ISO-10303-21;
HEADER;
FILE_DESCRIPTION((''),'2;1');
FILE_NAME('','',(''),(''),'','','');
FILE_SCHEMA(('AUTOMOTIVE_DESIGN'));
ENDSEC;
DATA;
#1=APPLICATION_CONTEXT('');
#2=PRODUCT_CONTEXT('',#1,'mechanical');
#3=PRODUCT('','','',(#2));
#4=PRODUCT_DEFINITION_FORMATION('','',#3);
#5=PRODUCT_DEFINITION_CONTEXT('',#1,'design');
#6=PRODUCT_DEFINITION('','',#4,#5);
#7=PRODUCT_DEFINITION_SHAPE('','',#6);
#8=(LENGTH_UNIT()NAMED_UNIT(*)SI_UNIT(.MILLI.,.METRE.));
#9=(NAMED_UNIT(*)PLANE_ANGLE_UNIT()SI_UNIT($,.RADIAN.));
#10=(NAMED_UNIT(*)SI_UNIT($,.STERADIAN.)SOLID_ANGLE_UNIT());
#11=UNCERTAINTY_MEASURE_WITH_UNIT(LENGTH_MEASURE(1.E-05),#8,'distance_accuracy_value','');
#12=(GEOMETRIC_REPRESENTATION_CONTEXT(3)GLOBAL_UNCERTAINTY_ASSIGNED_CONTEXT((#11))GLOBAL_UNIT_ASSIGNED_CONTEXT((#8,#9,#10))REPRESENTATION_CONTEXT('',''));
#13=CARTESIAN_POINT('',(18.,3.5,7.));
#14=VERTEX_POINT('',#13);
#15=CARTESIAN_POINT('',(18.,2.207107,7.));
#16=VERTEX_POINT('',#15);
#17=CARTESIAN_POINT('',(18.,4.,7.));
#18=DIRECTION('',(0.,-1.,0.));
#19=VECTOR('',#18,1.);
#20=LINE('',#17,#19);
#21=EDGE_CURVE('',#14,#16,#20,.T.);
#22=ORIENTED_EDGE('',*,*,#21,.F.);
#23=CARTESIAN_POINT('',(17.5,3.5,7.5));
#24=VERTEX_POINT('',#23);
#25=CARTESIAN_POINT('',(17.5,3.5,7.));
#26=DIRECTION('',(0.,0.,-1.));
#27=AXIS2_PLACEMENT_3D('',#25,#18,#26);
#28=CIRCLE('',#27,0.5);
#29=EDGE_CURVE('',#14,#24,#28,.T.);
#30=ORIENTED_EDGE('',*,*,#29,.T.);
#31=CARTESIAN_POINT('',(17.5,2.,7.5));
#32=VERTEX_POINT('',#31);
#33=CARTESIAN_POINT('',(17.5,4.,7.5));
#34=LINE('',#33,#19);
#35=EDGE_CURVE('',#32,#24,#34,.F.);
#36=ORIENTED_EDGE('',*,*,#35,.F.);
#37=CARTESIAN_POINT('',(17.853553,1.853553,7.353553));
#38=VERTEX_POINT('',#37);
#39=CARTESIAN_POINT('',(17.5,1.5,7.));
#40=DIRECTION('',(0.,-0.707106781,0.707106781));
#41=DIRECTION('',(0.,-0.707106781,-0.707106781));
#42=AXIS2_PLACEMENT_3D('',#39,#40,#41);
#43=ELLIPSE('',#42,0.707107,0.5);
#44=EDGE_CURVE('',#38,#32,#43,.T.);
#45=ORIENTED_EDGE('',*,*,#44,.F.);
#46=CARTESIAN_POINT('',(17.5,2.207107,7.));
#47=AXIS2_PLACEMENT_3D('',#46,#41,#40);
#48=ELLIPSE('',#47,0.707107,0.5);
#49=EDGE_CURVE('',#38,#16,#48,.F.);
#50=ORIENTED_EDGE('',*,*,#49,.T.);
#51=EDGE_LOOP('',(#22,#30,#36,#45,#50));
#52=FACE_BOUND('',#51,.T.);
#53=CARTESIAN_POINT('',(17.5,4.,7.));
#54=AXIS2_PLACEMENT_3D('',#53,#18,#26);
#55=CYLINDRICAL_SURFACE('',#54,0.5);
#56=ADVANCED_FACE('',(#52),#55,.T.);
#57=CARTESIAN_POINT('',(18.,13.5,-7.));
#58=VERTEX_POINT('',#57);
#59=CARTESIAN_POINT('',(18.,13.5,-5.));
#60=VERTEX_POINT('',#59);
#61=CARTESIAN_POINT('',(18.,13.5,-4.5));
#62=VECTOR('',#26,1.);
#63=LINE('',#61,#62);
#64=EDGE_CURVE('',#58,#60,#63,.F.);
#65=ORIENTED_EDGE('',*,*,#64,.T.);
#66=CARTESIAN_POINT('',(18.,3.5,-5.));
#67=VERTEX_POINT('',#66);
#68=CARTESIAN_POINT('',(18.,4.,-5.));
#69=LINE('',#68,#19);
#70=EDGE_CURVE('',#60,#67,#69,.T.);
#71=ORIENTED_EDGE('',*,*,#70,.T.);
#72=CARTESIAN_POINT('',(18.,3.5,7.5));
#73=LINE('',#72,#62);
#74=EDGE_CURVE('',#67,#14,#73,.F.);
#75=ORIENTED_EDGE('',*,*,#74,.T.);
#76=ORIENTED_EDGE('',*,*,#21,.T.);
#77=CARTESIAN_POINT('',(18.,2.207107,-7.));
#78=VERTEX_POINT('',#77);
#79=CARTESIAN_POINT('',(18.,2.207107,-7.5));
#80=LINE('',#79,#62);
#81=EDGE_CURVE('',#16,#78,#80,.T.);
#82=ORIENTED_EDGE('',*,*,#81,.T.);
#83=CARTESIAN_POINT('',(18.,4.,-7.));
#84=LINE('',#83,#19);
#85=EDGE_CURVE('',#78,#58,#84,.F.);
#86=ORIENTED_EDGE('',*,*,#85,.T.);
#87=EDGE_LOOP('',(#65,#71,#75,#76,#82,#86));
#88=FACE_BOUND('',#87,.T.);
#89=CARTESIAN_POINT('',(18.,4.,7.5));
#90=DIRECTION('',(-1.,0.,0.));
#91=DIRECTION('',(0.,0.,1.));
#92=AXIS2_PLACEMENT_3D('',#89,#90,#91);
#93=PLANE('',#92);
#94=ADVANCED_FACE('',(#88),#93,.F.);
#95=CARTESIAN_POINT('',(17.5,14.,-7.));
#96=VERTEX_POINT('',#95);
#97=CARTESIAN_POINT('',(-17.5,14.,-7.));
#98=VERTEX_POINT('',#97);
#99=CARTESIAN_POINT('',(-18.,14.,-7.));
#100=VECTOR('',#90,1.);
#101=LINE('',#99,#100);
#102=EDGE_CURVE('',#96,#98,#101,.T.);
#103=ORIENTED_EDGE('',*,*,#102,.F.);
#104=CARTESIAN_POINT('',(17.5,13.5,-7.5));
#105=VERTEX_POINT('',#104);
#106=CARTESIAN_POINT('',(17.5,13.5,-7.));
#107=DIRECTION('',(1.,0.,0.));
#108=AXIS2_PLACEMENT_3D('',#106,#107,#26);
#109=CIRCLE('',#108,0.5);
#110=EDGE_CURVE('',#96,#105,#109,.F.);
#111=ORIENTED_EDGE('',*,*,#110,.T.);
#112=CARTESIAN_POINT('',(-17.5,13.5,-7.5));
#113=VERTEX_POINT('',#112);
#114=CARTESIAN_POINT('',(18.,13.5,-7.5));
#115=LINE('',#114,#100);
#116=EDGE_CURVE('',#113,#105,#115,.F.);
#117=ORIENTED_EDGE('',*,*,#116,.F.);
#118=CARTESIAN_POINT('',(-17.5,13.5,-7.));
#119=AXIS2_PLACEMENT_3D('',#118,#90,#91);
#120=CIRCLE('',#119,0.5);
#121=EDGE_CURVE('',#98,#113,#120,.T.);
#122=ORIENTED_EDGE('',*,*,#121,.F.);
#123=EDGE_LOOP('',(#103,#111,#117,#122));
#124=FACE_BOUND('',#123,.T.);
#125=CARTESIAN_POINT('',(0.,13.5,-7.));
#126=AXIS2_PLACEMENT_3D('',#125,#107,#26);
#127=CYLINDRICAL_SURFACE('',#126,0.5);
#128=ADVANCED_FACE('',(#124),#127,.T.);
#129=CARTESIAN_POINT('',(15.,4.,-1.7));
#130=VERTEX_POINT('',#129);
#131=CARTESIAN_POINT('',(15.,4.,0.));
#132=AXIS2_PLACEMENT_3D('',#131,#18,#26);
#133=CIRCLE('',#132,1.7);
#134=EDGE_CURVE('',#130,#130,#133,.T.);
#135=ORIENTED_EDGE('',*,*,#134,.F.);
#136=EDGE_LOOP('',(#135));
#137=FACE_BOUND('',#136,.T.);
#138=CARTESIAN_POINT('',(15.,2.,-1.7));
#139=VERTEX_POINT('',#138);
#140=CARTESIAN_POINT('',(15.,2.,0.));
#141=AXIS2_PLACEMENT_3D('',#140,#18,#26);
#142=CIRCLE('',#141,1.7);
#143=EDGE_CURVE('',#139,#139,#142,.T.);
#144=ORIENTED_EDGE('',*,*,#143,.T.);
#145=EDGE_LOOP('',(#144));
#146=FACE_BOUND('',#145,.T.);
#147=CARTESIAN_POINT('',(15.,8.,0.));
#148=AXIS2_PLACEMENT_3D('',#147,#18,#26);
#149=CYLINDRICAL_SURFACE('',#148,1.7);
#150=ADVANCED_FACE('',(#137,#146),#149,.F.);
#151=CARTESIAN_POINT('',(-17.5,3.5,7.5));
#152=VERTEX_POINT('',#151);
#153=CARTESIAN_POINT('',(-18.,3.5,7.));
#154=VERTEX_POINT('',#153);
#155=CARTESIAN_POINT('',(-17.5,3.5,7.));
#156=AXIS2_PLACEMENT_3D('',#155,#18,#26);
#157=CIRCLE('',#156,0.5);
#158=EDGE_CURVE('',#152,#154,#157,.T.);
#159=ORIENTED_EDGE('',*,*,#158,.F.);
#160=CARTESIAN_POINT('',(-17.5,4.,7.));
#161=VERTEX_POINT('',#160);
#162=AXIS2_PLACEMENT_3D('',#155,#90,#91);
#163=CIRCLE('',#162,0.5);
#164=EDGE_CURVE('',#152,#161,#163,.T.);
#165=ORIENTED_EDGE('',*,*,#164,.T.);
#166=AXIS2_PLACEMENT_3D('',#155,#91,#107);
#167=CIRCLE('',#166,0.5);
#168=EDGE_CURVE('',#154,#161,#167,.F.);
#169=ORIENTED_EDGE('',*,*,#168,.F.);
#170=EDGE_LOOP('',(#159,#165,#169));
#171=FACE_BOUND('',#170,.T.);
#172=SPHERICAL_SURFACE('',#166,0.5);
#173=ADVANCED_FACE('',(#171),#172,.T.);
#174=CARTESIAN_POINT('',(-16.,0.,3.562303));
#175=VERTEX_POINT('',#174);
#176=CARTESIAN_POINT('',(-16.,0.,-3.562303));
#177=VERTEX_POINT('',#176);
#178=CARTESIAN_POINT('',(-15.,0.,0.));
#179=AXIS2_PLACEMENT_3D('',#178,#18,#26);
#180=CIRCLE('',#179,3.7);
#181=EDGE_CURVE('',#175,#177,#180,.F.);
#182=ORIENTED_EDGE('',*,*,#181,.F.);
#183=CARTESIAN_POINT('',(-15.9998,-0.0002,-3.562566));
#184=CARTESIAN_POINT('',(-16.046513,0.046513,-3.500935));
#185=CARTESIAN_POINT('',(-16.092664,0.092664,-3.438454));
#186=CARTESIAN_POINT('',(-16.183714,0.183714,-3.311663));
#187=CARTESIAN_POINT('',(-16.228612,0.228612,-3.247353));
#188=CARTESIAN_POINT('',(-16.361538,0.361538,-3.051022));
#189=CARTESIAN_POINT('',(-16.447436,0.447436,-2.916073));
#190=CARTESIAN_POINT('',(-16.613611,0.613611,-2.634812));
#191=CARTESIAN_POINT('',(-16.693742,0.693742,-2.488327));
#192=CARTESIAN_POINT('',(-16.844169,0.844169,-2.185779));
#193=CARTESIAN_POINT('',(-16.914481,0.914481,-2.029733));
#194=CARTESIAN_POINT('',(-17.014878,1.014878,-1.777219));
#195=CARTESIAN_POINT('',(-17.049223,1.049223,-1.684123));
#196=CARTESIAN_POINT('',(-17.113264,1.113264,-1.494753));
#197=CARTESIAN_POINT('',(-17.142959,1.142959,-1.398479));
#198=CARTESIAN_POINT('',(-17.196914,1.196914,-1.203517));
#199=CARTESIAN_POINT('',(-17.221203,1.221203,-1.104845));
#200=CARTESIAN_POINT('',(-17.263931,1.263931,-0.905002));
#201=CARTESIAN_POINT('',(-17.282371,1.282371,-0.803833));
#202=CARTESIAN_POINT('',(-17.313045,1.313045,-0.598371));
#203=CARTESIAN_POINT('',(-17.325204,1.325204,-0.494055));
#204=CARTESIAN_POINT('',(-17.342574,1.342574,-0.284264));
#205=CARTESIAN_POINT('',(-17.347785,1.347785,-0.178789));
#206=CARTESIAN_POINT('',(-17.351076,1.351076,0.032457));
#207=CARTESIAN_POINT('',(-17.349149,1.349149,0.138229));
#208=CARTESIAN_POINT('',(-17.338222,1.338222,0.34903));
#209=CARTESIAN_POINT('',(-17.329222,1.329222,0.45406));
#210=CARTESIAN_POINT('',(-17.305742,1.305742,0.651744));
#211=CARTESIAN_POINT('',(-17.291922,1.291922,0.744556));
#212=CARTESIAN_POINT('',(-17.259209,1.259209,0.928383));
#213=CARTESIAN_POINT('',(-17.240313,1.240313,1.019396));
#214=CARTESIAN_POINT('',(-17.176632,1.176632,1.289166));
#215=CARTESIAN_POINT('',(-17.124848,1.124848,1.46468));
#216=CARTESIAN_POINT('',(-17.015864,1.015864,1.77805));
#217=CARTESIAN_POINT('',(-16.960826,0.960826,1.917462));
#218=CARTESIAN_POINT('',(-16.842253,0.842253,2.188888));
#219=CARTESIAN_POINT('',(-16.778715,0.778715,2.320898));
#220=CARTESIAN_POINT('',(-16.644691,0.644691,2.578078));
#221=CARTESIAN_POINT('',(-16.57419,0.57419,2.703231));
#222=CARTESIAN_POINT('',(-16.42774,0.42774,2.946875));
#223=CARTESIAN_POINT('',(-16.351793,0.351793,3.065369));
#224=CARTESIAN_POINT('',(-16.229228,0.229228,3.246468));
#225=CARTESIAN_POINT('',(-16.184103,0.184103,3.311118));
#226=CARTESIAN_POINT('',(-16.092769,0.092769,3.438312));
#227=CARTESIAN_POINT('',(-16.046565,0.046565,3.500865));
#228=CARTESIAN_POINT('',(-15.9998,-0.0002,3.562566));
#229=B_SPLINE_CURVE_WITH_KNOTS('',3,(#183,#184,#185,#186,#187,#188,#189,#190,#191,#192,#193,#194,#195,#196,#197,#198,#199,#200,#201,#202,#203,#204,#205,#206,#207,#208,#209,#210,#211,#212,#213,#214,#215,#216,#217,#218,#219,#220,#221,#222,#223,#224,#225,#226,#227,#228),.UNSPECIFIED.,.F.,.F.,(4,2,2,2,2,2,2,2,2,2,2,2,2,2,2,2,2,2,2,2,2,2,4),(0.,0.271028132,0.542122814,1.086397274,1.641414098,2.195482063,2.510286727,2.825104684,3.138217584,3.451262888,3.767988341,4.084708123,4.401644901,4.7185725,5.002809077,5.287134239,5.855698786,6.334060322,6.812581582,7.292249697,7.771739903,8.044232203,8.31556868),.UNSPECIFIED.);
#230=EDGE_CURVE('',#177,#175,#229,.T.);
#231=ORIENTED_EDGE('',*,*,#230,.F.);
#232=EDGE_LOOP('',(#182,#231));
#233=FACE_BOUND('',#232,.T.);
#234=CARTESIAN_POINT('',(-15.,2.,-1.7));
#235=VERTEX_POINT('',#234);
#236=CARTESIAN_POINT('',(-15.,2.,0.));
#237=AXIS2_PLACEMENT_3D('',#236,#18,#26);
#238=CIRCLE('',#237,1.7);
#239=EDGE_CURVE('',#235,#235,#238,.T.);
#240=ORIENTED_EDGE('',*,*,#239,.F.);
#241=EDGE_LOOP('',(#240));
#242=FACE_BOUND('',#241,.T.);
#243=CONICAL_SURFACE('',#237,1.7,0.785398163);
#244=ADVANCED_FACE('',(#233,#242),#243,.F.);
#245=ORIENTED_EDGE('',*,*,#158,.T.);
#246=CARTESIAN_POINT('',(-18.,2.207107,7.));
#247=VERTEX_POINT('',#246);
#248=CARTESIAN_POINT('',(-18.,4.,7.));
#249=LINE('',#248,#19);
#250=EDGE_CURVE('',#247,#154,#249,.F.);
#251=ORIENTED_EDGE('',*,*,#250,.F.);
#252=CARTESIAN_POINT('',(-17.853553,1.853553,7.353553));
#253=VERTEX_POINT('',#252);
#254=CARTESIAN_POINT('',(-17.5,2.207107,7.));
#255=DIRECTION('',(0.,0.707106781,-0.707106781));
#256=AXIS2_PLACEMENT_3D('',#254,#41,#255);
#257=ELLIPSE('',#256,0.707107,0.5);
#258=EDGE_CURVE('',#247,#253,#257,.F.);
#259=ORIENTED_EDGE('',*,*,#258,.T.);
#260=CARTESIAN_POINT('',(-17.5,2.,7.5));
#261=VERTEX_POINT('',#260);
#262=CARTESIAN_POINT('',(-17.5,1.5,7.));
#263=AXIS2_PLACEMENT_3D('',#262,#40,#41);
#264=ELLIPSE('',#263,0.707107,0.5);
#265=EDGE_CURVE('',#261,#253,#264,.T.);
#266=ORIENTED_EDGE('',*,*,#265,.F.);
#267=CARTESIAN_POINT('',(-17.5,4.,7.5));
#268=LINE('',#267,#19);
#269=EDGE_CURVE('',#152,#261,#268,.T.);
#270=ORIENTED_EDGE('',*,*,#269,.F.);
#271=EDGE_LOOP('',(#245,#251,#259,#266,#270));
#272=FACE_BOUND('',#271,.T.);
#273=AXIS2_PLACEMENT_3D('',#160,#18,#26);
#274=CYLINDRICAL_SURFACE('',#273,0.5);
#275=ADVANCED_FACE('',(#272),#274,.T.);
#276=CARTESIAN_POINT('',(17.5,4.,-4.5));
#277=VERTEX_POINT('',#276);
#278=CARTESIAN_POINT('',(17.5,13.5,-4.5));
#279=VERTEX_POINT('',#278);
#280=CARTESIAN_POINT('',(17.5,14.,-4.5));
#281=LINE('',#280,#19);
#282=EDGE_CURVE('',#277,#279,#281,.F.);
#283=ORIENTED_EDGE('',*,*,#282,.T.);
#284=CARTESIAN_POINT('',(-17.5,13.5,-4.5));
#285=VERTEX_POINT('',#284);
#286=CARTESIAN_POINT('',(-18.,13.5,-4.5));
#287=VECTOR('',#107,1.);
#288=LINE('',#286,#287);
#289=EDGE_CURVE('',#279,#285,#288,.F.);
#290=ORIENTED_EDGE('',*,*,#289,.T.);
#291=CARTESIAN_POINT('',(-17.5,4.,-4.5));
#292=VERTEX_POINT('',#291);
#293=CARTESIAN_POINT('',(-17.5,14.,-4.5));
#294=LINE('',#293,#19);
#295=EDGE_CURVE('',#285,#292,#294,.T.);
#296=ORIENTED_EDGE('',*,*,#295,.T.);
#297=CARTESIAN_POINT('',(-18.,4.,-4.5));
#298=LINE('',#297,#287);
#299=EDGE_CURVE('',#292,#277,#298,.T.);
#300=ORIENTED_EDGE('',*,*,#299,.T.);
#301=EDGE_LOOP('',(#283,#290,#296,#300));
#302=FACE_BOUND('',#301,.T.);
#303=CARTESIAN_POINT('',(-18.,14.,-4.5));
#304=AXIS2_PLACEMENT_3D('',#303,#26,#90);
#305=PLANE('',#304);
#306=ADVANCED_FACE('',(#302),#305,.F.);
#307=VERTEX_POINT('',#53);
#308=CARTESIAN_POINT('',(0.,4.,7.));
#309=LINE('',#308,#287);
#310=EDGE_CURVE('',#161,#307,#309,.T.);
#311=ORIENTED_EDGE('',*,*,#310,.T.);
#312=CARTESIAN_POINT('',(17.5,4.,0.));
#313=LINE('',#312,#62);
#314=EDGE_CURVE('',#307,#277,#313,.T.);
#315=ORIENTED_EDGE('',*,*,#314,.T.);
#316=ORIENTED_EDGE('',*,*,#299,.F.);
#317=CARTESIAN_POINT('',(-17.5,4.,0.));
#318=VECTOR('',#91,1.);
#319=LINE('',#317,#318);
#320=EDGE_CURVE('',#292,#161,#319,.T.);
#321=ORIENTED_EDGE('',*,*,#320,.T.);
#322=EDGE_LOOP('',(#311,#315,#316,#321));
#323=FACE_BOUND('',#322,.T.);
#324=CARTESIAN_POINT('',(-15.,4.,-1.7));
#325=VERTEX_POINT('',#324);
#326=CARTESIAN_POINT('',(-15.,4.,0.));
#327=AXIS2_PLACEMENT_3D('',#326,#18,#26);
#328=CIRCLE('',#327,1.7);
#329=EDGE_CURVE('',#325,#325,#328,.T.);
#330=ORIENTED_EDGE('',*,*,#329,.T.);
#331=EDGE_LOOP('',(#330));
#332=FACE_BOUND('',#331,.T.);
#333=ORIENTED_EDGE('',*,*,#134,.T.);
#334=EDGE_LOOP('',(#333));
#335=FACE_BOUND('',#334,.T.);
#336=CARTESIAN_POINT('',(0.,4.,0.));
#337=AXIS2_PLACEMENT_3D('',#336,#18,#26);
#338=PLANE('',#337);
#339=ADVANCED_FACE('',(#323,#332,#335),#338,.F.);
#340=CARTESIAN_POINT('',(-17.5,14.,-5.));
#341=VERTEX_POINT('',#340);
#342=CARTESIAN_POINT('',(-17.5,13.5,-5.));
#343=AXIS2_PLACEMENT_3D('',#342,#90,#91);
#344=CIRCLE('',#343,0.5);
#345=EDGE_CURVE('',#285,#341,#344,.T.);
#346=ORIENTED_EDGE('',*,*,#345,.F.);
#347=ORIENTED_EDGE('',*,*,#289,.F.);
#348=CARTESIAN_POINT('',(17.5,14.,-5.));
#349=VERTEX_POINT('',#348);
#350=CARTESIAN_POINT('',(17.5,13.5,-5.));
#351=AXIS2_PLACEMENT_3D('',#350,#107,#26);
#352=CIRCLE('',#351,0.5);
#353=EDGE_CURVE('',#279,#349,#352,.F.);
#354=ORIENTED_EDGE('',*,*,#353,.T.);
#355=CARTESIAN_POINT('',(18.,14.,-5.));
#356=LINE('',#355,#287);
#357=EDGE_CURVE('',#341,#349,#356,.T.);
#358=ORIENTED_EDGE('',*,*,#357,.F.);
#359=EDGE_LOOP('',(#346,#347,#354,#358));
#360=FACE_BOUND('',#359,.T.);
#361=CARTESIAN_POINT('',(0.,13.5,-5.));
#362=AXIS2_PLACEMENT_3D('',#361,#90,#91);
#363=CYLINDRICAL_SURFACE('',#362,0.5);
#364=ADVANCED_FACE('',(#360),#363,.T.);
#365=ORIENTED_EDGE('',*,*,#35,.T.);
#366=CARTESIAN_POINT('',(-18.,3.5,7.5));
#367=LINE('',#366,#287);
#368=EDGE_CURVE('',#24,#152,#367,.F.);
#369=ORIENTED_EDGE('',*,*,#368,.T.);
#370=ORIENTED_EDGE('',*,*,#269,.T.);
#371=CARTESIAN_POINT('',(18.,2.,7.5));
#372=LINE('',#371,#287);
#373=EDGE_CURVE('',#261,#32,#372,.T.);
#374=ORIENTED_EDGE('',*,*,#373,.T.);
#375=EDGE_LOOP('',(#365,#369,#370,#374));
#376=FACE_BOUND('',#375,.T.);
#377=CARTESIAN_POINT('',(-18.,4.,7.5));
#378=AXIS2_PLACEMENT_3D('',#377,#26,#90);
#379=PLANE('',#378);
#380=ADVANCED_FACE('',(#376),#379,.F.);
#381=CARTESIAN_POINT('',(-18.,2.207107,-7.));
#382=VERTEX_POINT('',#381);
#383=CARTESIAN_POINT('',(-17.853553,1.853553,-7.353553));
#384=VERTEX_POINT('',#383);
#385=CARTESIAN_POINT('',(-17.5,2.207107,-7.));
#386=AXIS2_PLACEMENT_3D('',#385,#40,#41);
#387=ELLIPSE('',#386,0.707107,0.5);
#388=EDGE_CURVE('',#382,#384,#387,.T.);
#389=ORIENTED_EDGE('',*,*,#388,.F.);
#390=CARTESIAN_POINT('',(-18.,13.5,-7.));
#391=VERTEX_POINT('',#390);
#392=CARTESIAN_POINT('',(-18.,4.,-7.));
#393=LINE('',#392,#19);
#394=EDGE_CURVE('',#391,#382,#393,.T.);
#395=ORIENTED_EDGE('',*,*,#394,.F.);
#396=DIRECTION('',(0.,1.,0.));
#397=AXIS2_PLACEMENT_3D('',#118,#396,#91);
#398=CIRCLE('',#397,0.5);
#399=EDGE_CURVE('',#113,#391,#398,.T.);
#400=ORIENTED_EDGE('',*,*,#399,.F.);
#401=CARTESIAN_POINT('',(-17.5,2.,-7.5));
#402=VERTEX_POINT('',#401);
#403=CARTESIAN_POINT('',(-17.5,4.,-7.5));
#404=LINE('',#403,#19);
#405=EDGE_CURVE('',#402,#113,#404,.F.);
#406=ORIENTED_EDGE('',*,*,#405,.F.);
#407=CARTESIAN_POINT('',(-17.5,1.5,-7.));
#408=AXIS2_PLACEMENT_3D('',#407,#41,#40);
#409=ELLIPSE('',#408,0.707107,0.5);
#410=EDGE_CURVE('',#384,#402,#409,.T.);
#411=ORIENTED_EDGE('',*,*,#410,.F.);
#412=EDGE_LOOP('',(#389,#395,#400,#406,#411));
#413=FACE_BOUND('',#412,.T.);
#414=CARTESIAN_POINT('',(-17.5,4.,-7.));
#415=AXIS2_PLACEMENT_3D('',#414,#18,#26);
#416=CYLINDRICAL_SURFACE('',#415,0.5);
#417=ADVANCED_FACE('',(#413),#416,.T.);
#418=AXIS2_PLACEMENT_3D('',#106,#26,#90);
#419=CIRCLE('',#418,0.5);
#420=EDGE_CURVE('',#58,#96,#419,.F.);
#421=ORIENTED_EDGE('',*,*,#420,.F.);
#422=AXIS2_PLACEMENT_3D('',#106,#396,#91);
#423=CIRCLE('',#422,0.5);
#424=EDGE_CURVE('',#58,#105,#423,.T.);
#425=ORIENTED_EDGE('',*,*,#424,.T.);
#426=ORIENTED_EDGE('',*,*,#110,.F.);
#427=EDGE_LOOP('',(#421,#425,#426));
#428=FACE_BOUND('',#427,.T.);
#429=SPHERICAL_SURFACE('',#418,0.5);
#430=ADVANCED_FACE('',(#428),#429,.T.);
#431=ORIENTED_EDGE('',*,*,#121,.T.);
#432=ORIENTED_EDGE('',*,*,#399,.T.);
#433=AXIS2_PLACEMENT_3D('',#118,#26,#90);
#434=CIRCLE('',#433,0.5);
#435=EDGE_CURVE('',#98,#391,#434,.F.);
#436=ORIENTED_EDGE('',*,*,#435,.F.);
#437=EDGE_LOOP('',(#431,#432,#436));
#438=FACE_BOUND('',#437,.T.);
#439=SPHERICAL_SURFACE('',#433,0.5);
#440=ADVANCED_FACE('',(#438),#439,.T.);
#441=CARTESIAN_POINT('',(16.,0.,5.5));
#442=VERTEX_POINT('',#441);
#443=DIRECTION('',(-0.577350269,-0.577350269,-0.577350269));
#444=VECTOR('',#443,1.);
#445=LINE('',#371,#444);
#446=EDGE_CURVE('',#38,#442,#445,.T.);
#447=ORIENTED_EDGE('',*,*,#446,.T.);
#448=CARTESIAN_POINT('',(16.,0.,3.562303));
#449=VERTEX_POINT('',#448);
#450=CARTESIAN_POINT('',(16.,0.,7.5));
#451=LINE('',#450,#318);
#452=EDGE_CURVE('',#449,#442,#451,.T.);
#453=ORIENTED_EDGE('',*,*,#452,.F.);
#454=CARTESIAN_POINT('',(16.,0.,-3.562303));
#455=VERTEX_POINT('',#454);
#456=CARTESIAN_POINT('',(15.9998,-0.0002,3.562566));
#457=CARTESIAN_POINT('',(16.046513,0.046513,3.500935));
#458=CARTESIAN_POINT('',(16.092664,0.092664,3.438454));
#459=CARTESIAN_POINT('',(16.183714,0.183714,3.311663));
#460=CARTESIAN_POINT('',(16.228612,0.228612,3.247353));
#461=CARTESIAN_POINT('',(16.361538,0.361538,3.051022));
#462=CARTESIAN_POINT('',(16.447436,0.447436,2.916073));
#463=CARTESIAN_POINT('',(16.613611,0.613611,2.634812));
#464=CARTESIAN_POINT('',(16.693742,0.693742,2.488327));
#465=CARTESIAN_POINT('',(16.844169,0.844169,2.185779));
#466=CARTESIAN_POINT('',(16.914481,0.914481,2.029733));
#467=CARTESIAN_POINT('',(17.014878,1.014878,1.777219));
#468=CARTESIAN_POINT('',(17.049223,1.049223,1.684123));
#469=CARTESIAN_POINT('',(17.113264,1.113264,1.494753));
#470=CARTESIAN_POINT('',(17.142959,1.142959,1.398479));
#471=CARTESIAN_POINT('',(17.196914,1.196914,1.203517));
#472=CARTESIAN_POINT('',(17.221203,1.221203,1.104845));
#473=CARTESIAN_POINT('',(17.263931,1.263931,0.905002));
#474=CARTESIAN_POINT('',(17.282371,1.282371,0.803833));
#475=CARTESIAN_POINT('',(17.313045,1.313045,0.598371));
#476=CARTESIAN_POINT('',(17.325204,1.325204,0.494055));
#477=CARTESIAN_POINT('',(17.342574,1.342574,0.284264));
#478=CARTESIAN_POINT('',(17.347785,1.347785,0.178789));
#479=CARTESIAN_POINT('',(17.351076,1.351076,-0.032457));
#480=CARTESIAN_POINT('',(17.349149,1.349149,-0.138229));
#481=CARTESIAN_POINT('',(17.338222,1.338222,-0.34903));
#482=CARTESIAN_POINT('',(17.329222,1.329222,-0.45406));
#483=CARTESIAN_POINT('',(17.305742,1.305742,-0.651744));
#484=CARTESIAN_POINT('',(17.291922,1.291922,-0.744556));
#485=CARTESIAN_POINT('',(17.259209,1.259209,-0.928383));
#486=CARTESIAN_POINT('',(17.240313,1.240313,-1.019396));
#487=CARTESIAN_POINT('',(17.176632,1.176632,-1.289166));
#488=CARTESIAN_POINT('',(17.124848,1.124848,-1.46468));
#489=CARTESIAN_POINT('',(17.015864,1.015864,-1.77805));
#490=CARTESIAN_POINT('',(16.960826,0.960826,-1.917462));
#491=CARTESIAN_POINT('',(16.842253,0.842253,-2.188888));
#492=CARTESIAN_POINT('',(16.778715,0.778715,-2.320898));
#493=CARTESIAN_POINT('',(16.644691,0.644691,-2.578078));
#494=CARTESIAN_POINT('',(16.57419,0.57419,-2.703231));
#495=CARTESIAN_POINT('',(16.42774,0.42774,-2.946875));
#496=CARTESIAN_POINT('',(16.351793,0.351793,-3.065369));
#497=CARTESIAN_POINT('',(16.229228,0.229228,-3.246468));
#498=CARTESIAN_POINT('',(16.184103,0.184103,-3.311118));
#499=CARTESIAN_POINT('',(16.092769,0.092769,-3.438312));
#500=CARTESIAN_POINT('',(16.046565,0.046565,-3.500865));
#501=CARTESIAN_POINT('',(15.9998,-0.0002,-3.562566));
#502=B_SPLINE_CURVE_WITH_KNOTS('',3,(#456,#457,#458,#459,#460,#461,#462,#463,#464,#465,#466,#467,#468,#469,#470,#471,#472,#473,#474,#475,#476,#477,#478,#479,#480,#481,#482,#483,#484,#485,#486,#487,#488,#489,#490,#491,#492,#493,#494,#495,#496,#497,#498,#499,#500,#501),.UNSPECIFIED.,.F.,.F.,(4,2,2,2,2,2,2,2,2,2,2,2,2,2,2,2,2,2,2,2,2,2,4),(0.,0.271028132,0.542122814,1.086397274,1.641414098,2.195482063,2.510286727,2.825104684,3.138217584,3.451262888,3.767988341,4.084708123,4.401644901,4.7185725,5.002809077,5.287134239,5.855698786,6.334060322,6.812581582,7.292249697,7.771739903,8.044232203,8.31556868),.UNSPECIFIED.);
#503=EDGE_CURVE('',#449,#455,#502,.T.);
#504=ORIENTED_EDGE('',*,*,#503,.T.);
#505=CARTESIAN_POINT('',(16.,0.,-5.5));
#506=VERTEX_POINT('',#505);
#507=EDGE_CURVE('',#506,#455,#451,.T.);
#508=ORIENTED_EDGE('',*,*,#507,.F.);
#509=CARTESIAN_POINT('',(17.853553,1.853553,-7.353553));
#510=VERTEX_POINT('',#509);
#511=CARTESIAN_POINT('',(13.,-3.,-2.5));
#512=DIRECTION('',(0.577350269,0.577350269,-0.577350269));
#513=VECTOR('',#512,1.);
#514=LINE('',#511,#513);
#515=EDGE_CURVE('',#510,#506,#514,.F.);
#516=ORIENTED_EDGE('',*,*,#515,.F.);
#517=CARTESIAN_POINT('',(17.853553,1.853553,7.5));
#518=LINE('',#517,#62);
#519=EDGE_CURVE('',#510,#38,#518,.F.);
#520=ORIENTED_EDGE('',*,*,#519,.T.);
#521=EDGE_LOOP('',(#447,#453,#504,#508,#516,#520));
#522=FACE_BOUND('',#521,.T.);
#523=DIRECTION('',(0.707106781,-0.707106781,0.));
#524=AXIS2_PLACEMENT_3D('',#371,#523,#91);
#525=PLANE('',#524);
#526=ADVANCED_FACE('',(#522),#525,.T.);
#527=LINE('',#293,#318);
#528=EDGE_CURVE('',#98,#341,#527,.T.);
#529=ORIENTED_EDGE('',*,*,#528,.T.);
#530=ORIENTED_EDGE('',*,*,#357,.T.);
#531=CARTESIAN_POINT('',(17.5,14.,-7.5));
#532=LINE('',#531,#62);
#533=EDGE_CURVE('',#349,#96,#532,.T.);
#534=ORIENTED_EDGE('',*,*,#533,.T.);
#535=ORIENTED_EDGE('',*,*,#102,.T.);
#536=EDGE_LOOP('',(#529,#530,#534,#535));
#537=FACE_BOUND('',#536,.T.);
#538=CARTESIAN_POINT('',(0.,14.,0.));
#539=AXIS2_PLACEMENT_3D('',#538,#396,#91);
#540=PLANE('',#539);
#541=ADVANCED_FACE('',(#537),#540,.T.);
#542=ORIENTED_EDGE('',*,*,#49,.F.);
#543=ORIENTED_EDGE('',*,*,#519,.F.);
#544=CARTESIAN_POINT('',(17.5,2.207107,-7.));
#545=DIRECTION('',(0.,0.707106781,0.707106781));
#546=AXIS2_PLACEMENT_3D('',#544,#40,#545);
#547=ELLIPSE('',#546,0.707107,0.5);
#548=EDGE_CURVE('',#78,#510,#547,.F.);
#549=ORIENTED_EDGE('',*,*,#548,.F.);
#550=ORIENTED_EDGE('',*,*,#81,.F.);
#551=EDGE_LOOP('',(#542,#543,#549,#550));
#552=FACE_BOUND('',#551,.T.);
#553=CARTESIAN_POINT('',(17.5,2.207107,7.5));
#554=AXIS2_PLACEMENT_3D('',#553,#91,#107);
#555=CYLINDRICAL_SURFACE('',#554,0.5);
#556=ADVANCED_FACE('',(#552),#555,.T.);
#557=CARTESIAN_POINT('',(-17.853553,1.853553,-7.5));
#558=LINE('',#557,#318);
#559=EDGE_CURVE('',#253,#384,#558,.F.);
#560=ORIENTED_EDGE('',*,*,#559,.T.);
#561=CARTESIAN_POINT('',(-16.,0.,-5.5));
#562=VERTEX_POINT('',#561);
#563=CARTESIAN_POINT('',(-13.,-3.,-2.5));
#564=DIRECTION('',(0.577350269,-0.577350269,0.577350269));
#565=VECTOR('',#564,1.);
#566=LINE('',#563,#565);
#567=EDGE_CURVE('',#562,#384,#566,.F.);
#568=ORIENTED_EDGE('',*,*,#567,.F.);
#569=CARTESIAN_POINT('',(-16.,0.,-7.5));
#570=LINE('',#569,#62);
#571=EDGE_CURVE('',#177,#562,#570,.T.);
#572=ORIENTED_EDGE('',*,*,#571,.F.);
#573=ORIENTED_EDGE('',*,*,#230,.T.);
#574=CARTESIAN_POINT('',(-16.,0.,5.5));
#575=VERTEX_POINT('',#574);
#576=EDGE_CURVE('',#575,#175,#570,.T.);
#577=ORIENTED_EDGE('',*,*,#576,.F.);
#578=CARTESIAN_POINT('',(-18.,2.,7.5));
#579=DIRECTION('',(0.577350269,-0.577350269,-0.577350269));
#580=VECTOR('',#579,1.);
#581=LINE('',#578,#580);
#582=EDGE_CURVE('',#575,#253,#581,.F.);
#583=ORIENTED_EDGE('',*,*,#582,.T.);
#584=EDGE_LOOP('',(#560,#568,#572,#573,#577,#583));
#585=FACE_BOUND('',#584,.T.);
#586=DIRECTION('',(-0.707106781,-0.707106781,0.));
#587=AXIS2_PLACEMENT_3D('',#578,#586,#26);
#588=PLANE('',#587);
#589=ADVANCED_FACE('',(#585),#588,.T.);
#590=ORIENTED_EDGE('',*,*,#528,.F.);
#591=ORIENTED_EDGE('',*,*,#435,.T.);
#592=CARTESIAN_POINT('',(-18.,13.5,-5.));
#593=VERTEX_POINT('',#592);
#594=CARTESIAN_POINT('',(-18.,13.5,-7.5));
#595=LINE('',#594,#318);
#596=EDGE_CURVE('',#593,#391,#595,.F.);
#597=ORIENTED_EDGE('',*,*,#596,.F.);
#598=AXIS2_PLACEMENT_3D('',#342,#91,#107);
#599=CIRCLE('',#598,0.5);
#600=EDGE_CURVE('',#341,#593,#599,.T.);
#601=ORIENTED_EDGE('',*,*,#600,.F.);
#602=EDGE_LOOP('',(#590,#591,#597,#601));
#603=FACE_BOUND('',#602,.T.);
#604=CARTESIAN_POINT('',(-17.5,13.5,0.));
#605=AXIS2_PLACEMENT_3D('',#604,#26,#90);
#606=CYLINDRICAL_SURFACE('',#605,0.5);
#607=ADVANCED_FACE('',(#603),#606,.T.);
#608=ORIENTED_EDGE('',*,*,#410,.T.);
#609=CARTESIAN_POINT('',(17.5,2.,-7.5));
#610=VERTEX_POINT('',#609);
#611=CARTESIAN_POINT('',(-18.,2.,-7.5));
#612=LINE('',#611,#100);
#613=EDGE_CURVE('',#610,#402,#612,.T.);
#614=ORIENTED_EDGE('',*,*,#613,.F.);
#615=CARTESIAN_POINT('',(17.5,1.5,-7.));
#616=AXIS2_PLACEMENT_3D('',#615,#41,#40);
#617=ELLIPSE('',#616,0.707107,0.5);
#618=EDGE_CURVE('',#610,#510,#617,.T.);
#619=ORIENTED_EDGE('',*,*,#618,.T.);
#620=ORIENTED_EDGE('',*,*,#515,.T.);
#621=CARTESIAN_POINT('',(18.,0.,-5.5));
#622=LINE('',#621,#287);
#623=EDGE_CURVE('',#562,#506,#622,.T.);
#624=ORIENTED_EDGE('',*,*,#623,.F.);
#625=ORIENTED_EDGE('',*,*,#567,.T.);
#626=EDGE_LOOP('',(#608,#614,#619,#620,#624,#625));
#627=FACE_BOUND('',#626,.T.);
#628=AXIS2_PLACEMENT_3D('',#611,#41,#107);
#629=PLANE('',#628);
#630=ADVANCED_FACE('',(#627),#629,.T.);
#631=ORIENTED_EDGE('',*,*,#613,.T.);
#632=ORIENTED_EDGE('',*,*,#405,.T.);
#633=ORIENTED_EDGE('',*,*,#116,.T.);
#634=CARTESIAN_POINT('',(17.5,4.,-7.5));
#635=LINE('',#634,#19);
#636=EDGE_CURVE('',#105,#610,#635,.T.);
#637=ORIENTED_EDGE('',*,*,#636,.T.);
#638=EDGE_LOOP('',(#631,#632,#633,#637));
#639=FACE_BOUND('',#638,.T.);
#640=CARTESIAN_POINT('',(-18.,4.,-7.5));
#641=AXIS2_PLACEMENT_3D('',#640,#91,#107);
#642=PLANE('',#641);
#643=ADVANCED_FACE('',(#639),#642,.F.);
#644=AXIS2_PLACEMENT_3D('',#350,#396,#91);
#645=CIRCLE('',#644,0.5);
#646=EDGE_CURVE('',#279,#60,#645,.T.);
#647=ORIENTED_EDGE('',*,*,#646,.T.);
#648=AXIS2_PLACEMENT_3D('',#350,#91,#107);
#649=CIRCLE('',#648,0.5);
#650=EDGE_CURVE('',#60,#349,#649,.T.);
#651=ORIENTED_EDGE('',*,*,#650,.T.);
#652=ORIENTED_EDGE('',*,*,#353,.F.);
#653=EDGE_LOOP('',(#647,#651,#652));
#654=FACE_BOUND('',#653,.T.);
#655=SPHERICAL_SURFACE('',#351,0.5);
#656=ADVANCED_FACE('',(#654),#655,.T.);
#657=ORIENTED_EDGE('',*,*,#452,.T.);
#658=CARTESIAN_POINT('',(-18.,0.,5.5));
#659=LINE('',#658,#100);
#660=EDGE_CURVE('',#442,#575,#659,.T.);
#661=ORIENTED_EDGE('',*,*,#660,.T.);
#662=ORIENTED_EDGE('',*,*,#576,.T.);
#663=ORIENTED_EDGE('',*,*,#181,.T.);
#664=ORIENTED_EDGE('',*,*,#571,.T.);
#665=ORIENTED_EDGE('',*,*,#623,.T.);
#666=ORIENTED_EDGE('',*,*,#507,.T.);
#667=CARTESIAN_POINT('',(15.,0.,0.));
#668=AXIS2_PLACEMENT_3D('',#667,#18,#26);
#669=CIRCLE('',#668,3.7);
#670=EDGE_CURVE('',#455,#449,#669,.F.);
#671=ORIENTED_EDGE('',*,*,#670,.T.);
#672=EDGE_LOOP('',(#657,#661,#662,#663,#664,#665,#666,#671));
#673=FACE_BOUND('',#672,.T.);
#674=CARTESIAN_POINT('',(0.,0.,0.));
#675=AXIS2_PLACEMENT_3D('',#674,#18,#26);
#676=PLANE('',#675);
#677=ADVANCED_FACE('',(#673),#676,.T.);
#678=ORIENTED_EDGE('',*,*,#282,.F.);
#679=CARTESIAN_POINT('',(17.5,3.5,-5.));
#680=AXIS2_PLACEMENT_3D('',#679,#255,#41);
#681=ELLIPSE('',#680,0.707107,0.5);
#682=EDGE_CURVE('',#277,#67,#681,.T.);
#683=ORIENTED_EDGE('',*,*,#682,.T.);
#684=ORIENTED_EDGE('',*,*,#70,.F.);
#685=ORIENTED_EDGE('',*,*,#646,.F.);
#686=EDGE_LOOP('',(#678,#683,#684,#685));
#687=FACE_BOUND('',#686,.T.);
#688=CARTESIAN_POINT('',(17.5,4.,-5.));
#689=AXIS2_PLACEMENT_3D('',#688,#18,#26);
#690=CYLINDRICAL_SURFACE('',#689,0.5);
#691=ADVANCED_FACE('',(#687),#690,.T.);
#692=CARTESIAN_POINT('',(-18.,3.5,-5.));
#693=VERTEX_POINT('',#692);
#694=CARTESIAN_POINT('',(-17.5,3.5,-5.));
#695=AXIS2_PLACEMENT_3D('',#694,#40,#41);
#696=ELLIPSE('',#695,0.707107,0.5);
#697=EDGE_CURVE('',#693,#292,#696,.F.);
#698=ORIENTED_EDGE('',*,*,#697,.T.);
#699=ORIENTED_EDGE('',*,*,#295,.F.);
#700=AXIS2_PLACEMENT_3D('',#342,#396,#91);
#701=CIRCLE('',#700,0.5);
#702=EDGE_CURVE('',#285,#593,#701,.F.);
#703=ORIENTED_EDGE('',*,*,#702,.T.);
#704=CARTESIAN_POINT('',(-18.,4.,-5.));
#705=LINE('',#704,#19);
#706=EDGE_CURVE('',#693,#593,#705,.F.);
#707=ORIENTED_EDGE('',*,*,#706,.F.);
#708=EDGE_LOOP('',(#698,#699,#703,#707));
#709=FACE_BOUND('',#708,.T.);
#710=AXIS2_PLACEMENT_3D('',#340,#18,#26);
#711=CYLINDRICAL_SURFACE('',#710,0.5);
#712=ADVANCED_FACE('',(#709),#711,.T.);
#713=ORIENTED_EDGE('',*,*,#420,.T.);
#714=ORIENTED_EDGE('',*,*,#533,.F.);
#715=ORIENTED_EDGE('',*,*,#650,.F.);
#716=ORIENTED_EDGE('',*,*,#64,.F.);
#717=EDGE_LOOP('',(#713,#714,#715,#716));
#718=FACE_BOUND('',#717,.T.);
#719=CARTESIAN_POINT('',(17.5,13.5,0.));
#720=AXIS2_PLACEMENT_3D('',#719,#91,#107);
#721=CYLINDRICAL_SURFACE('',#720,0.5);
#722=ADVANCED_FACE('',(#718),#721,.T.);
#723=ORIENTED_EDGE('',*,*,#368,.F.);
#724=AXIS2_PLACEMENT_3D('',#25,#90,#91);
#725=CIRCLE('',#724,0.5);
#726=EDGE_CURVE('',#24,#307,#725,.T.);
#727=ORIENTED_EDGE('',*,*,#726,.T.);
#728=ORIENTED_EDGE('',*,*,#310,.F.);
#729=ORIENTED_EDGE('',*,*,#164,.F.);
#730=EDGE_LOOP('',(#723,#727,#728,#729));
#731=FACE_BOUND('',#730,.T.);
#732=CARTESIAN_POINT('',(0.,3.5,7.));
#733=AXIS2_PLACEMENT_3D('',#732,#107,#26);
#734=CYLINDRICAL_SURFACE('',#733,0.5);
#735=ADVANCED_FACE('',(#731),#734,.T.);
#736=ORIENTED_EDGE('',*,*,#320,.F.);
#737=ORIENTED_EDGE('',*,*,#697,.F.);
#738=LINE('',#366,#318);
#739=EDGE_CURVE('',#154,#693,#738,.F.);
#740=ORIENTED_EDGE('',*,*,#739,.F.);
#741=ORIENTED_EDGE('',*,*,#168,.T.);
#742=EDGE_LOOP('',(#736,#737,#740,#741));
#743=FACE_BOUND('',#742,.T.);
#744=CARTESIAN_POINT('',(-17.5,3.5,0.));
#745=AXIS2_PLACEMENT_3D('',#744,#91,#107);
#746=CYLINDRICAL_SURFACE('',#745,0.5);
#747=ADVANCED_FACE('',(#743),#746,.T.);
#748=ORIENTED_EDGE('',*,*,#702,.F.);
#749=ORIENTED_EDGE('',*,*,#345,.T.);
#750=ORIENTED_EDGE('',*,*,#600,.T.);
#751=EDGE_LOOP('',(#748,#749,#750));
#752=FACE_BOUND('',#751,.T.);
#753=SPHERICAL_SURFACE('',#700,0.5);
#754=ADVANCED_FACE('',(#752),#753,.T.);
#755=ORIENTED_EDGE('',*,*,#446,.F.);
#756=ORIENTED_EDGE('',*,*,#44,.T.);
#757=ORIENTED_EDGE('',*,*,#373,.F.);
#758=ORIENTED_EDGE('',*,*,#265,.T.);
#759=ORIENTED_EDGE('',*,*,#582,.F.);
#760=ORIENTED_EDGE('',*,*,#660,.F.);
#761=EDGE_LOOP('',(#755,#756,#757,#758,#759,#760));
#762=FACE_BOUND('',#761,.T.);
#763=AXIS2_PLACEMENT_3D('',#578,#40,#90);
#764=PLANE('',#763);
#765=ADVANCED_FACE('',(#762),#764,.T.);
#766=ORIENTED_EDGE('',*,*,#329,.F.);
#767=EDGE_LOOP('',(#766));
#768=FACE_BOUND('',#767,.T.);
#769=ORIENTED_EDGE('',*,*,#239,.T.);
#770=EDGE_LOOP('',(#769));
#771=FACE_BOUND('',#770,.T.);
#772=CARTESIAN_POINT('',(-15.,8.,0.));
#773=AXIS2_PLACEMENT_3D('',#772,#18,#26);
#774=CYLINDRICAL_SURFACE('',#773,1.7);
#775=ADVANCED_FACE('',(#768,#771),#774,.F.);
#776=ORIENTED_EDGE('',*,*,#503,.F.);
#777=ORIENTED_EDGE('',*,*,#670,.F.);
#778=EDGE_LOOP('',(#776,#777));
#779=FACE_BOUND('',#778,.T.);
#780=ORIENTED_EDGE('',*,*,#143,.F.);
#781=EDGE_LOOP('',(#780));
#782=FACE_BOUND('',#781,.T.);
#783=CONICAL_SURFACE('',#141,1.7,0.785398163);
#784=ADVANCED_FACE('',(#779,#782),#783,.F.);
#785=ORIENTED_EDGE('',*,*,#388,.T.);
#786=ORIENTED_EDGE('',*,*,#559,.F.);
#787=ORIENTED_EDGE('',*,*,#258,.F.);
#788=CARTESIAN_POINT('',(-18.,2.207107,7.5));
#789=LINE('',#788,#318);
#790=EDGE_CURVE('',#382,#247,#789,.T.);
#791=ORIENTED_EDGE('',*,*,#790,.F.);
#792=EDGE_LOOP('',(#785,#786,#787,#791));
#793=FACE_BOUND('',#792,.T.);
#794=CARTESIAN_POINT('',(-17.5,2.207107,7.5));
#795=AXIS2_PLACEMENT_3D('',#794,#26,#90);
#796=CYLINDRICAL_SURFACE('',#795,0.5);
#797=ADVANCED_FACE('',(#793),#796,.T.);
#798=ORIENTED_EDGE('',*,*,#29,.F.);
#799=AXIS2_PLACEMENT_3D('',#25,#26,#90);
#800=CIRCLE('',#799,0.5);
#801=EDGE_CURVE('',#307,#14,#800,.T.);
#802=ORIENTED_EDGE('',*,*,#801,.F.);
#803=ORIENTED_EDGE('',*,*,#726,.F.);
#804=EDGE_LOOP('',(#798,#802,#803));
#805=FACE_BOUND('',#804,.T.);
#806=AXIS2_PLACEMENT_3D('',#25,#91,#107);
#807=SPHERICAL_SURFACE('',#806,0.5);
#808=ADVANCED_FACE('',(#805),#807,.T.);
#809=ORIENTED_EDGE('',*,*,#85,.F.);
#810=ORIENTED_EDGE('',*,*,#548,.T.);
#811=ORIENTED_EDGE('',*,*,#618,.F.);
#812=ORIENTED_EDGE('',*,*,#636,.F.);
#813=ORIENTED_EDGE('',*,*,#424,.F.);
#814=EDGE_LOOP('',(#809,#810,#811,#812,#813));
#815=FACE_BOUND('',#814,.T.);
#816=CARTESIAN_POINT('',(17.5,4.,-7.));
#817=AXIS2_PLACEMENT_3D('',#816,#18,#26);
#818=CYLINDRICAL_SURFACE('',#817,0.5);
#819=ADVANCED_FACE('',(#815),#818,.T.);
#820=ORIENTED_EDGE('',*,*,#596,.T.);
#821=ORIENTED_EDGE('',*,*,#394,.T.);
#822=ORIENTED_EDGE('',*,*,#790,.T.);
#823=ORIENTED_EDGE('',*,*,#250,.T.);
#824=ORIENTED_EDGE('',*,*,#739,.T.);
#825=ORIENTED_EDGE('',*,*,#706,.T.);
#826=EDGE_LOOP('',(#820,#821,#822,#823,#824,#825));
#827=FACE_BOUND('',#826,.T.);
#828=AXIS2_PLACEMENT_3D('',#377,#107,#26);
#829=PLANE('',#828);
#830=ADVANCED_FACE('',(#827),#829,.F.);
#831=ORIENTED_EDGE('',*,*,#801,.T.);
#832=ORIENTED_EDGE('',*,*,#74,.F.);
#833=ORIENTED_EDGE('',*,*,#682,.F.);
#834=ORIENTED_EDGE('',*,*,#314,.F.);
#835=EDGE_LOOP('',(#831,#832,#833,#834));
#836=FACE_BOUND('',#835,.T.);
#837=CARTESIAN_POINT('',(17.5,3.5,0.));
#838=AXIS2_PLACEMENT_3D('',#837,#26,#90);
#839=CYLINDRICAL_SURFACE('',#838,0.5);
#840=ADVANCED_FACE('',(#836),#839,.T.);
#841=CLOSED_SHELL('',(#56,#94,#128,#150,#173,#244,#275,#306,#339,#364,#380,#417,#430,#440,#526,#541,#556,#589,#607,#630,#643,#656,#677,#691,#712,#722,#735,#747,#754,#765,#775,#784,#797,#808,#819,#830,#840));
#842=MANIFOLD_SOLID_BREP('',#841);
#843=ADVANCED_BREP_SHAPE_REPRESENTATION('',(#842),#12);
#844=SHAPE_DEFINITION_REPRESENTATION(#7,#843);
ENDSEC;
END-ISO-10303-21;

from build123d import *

# Parameters (mm, degrees)
SKETCH_1_W          = 36
SKETCH_1_H          = 15
EXTRUDE_1_DEPTH     = 4
SKETCH_2_W          = 36
SKETCH_2_H          = 3
EXTRUDE_2_DEPTH     = 10
SKETCH_3_R          = 1.7
CUT_EXTRUDE_1_DEPTH = 8
CHAMFER_1_SIZE      = 2
FILLET_1_R          = 0.5
FILLET_2_R          = 0.5


with BuildPart() as part:
    # Эскиз1 → Бобышка-Вытянуть1 (new body)
    with BuildSketch(Plane(origin=(0, 0, 0), x_dir=(1, 0, 0), z_dir=(0, 1, 0))):
        Rectangle(SKETCH_1_W, SKETCH_1_H)
    extrude(amount=EXTRUDE_1_DEPTH)

    # Эскиз2 → Бобышка-Вытянуть2 (add)
    with BuildSketch(Plane(origin=(0, 4, 0), x_dir=(1, 0, 0), z_dir=(0, 1, 0))):
        with Locations((0, 6)):
            Rectangle(SKETCH_2_W, SKETCH_2_H)
    extrude(amount=EXTRUDE_2_DEPTH)

    # Эскиз3 → Вырез-Вытянуть1 (cut)
    with BuildSketch(Plane.XZ):
        with Locations(Location((15, 0, 0), (0, 0, 270))):
            Circle(SKETCH_3_R)
        with Locations(Location((-15, 0, 0), (0, 0, 270))):
            Circle(SKETCH_3_R)
    extrude(amount=-CUT_EXTRUDE_1_DEPTH, mode=Mode.SUBTRACT)

    # Фаска1
    # the kernel refuses this chamfer: 2 mm, written as the material it takes off along each edge
    with BuildSketch(Plane(origin=(15, 0, 0), x_dir=(0, 0, -1), z_dir=(-1, 0, 0))) as chamfer_1_piece_1:
        Polygon((1.7 + CHAMFER_1_SIZE, 0), (1.7, -CHAMFER_1_SIZE), (1.7, 0), align=None)
    revolve(axis=Axis((15, 0, 0), (0, -1, 0)), mode=Mode.SUBTRACT)
    with BuildSketch(Plane(origin=(-15, 0, 0), x_dir=(0, 0, -1), z_dir=(-1, 0, 0))) as chamfer_1_piece_2:
        Polygon((1.7 + CHAMFER_1_SIZE, 0), (1.7, -CHAMFER_1_SIZE), (1.7, 0), align=None)
    revolve(axis=Axis((-15, 0, 0), (0, -1, 0)), mode=Mode.SUBTRACT)
    with BuildSketch(Plane(origin=(-23.143365976, 0, 7.5), x_dir=(0, 0.9996219169112968, 0.027495876610586494), z_dir=(1, 0, 0))) as chamfer_1_piece_3:
        Polygon((CHAMFER_1_SIZE * 0.999621916911, -CHAMFER_1_SIZE * 0.0274958766106), (-CHAMFER_1_SIZE * 0.0274958766106, -CHAMFER_1_SIZE * 0.999621916911), (0, 0), align=None)
    extrude(amount=46.286731952, mode=Mode.SUBTRACT)
    with BuildSketch(Plane(origin=(-18, 0, -12.643365976), x_dir=(-0.02749587661058563, 0.9996219169112968, 0), z_dir=(0, 0, 1)), Plane(origin=(18, 0, 12.643365976), x_dir=(0.02749587661058563, 0.9996219169112968, 0), z_dir=(0, 0, -1))) as chamfer_1_piece_4:
        Polygon((CHAMFER_1_SIZE * 0.999621916911, -CHAMFER_1_SIZE * 0.0274958766106), (-CHAMFER_1_SIZE * 0.0274958766106, -CHAMFER_1_SIZE * 0.999621916911), (0, 0), align=None)
    extrude(amount=25.286731952, mode=Mode.SUBTRACT)
    with BuildSketch(Plane(origin=(23.143365976, 0, -7.5), x_dir=(0, -0.027495876610586365, 0.9996219169112968), z_dir=(-1, 0, 0))) as chamfer_1_piece_5:
        Polygon((CHAMFER_1_SIZE * 0.999621916911, CHAMFER_1_SIZE * 0.0274958766106), (-CHAMFER_1_SIZE * 0.0274958766106, CHAMFER_1_SIZE * 0.999621916911), (0, 0), align=None)
    extrude(amount=46.286731952, mode=Mode.SUBTRACT)

    # Скругление1
    # the kernel refuses this fillet: 0.5 mm, written as the material it takes off along each edge
    with BuildSketch(Plane(origin=(-17.5, 13.5, -5), x_dir=(0, 0, 1), z_dir=(0, 1, 0))) as fillet_1_piece_1_section:
        Polygon((0, 0), (FILLET_1_R, 0), (FILLET_1_R, -FILLET_1_R), (0, -FILLET_1_R), align=None)
    fillet_1_piece_1 = extrude(amount=FILLET_1_R, mode=Mode.PRIVATE)
    fillet_1_piece_1 = fillet_1_piece_1 - Plane(origin=(-17.5, 13.5, -5), x_dir=(0.7071067811865475, 0, -0.7071067811865475), z_dir=(0, 1, 0)) * Sphere(FILLET_1_R, mode=Mode.PRIVATE)
    add(fillet_1_piece_1, mode=Mode.SUBTRACT)
    with BuildSketch(Plane(origin=(17.5, 13.5, -5), x_dir=(1, 0, 0), z_dir=(0, 1, 0))) as fillet_1_piece_2_section:
        Polygon((0, 0), (FILLET_1_R, 0), (FILLET_1_R, -FILLET_1_R), (0, -FILLET_1_R), align=None)
    fillet_1_piece_2 = extrude(amount=FILLET_1_R, mode=Mode.PRIVATE)
    fillet_1_piece_2 = fillet_1_piece_2 - Plane(origin=(17.5, 13.5, -5), x_dir=(-0.7071067811865475, 0, -0.7071067811865475), z_dir=(0, 1, 0)) * Sphere(FILLET_1_R, mode=Mode.PRIVATE)
    add(fillet_1_piece_2, mode=Mode.SUBTRACT)
    with BuildSketch(Plane(origin=(-17.5, 13.5, -7), x_dir=(0, 1, 0), z_dir=(0, 0, -1))) as fillet_1_piece_3_section:
        Polygon((0, 0), (FILLET_1_R, 0), (FILLET_1_R, -FILLET_1_R), (0, -FILLET_1_R), align=None)
    fillet_1_piece_3 = extrude(amount=FILLET_1_R, mode=Mode.PRIVATE)
    fillet_1_piece_3 = fillet_1_piece_3 - Plane(origin=(-17.5, 13.5, -7), x_dir=(0.7071067811865475, -0.7071067811865475, 0), z_dir=(0, 0, -1)) * Sphere(FILLET_1_R, mode=Mode.PRIVATE)
    add(fillet_1_piece_3, mode=Mode.SUBTRACT)
    with BuildSketch(Plane(origin=(17.5, 13.5, -7), x_dir=(0, 1, 0), z_dir=(0, 0, -1))) as fillet_1_piece_4_section:
        Polygon((0, 0), (FILLET_1_R, 0), (FILLET_1_R, FILLET_1_R), (0, FILLET_1_R), align=None)
    fillet_1_piece_4 = extrude(amount=FILLET_1_R, mode=Mode.PRIVATE)
    fillet_1_piece_4 = fillet_1_piece_4 - Plane(origin=(17.5, 13.5, -7), x_dir=(-0.7071067811865475, -0.7071067811865475, 0), z_dir=(0, 0, -1)) * Sphere(FILLET_1_R, mode=Mode.PRIVATE)
    add(fillet_1_piece_4, mode=Mode.SUBTRACT)
    with BuildSketch(Plane(origin=(-18, 4, -4.5), x_dir=(1, 0, 0), z_dir=(0, 0, 1))) as fillet_1_piece_5:
        with BuildLine():
            CenterArc((FILLET_1_R, -FILLET_1_R), FILLET_1_R, 90, 90)
            Line((0, -FILLET_1_R), (0, 0))
            Line((0, 0), (FILLET_1_R, 0))
        make_face()
    extrude(amount=13.25, mode=Mode.SUBTRACT)
    with BuildSketch(Plane(origin=(-18, 4, -4.5), x_dir=(0, 0, -1), z_dir=(0, 1, 0))) as fillet_1_piece_6:
        with BuildLine():
            CenterArc((FILLET_1_R, -FILLET_1_R), FILLET_1_R, 90, 90)
            Line((0, -FILLET_1_R), (0, 0))
            Line((0, 0), (FILLET_1_R, 0))
        make_face()
    extrude(amount=9.5, mode=Mode.SUBTRACT)
    with BuildSketch(Plane(origin=(18, 4, -4.5), x_dir=(0, 0, -1), z_dir=(0, 1, 0))) as fillet_1_piece_7:
        with BuildLine():
            CenterArc((FILLET_1_R, FILLET_1_R), FILLET_1_R, 180, 90)
            Line((0, FILLET_1_R), (0, 0))
            Line((0, 0), (FILLET_1_R, 0))
        make_face()
    extrude(amount=9.5, mode=Mode.SUBTRACT)
    with BuildSketch(Plane(origin=(-18, 14, -5), x_dir=(0, -1, 0), z_dir=(0, 0, -1)), Plane(origin=(18, 14, -7), x_dir=(0, -1, 0), z_dir=(0, 0, 1))) as fillet_1_piece_8:
        with BuildLine():
            CenterArc((FILLET_1_R, -FILLET_1_R), FILLET_1_R, 90, 90)
            Line((0, -FILLET_1_R), (0, 0))
            Line((0, 0), (FILLET_1_R, 0))
        make_face()
    extrude(amount=2, mode=Mode.SUBTRACT)
    with BuildSketch(Plane(origin=(17.5, 14, -4.5), x_dir=(0, 0, -1), z_dir=(-1, 0, 0))) as fillet_1_piece_9:
        with BuildLine():
            CenterArc((FILLET_1_R, FILLET_1_R), FILLET_1_R, 180, 90)
            Line((0, FILLET_1_R), (0, 0))
            Line((0, 0), (FILLET_1_R, 0))
        make_face()
    extrude(amount=35, mode=Mode.SUBTRACT)
    with BuildSketch(Plane(origin=(-17.5, 14, -7.5), x_dir=(0, -1, 0), z_dir=(1, 0, 0))) as fillet_1_piece_10:
        with BuildLine():
            CenterArc((FILLET_1_R, -FILLET_1_R), FILLET_1_R, 90, 90)
            Line((0, -FILLET_1_R), (0, 0))
            Line((0, 0), (FILLET_1_R, 0))
        make_face()
    extrude(amount=35, mode=Mode.SUBTRACT)
    with BuildSketch(Plane(origin=(-18, 2, -8.017766953), x_dir=(0, 1, 0), z_dir=(0, 0, 1)), Plane(origin=(18, 2, 8.017766953), x_dir=(0, 1, 0), z_dir=(0, 0, -1))) as fillet_1_piece_11:
        with BuildLine():
            CenterArc((FILLET_1_R * 0.414213562373, -FILLET_1_R), FILLET_1_R, 90, 45)
            Line((-FILLET_1_R * 0.292893218814, -FILLET_1_R * 0.292893218814), (0, 0))
            Line((0, 0), (FILLET_1_R * 0.414213562373, 0))
        make_face()
    extrude(amount=16.035533906, mode=Mode.SUBTRACT)
    with BuildSketch(Plane(origin=(18, 4, 8.75), x_dir=(0, -1, 0), z_dir=(0, 0, -1))) as fillet_1_piece_12:
        with BuildLine():
            CenterArc((FILLET_1_R, FILLET_1_R), FILLET_1_R, 180, 90)
            Line((0, FILLET_1_R), (0, 0))
            Line((0, 0), (FILLET_1_R, 0))
        make_face()
    extrude(amount=13.25, mode=Mode.SUBTRACT)
    with BuildSketch(Plane(origin=(18, 0.75, 7.5), x_dir=(-1, 0, 0), z_dir=(0, 1, 0))) as fillet_1_piece_13:
        with BuildLine():
            CenterArc((FILLET_1_R, -FILLET_1_R), FILLET_1_R, 90, 90)
            Line((0, -FILLET_1_R), (0, 0))
            Line((0, 0), (FILLET_1_R, 0))
        make_face()
    extrude(amount=4.5, mode=Mode.SUBTRACT)
    with BuildSketch(Plane(origin=(-18, 0.75, 7.5), x_dir=(1, 0, 0), z_dir=(0, 1, 0))) as fillet_1_piece_14:
        with BuildLine():
            CenterArc((FILLET_1_R, FILLET_1_R), FILLET_1_R, 180, 90)
            Line((0, FILLET_1_R), (0, 0))
            Line((0, 0), (FILLET_1_R, 0))
        make_face()
    extrude(amount=4.5, mode=Mode.SUBTRACT)
    with BuildSketch(Plane(origin=(-18, 13.5, -7.5), x_dir=(0, 0, 1), z_dir=(0, -1, 0)), Plane(origin=(18, 0.75, -7.5), x_dir=(0, 0, 1), z_dir=(0, 1, 0))) as fillet_1_piece_15:
        with BuildLine():
            CenterArc((FILLET_1_R, -FILLET_1_R), FILLET_1_R, 90, 90)
            Line((0, -FILLET_1_R), (0, 0))
            Line((0, 0), (FILLET_1_R, 0))
        make_face()
    extrude(amount=12.75, mode=Mode.SUBTRACT)
    with BuildSketch(Plane(origin=(-18, 4, -5.75), x_dir=(1, 0, 0), z_dir=(0, 0, 1))) as fillet_1_piece_16a_section:
        with BuildLine():
            CenterArc((FILLET_1_R, -FILLET_1_R), FILLET_1_R, 90, 90)
            Line((0, -FILLET_1_R), (0, 0))
            Line((0, 0), (FILLET_1_R, 0))
        make_face()
    fillet_1_piece_16a = extrude(amount=14.5, mode=Mode.PRIVATE)
    fillet_1_piece_16a = split(fillet_1_piece_16a, bisect_by=Plane(origin=(-17.886802443, 3.886802443, -4.5), z_dir=(0, 0, -1)), keep=Keep.TOP, mode=Mode.PRIVATE)
    with BuildSketch(Plane(origin=(-18, 2.75, -4.5), x_dir=(0, 0, -1), z_dir=(0, 1, 0))) as fillet_1_piece_16b_section:
        with BuildLine():
            CenterArc((FILLET_1_R, -FILLET_1_R), FILLET_1_R, 90, 90)
            Line((0, -FILLET_1_R), (0, 0))
            Line((0, 0), (FILLET_1_R, 0))
        make_face()
    fillet_1_piece_16b = extrude(amount=10.75, mode=Mode.PRIVATE)
    fillet_1_piece_16b = split(fillet_1_piece_16b, bisect_by=Plane(origin=(-17.886802443, 4, -4.613197557), z_dir=(0, -1, 0)), keep=Keep.TOP, mode=Mode.PRIVATE)
    fillet_1_piece_16 = fillet_1_piece_16a & fillet_1_piece_16b
    add(fillet_1_piece_16, mode=Mode.SUBTRACT)
    with BuildSketch(Plane(origin=(18, 2.75, -4.5), x_dir=(0, 0, -1), z_dir=(0, 1, 0))) as fillet_1_piece_17a_section:
        with BuildLine():
            CenterArc((FILLET_1_R, FILLET_1_R), FILLET_1_R, 180, 90)
            Line((0, FILLET_1_R), (0, 0))
            Line((0, 0), (FILLET_1_R, 0))
        make_face()
    fillet_1_piece_17a = extrude(amount=10.75, mode=Mode.PRIVATE)
    fillet_1_piece_17a = split(fillet_1_piece_17a, bisect_by=Plane(origin=(17.886802443, 4, -4.613197557), z_dir=(0, -1, 0)), keep=Keep.TOP, mode=Mode.PRIVATE)
    with BuildSketch(Plane(origin=(18, 4, 8.75), x_dir=(0, -1, 0), z_dir=(0, 0, -1))) as fillet_1_piece_17b_section:
        with BuildLine():
            CenterArc((FILLET_1_R, FILLET_1_R), FILLET_1_R, 180, 90)
            Line((0, FILLET_1_R), (0, 0))
            Line((0, 0), (FILLET_1_R, 0))
        make_face()
    fillet_1_piece_17b = extrude(amount=14.5, mode=Mode.PRIVATE)
    fillet_1_piece_17b = split(fillet_1_piece_17b, bisect_by=Plane(origin=(17.886802443, 3.886802443, -4.5), z_dir=(0, 0, -1)), keep=Keep.TOP, mode=Mode.PRIVATE)
    fillet_1_piece_17 = fillet_1_piece_17a & fillet_1_piece_17b
    add(fillet_1_piece_17, mode=Mode.SUBTRACT)

    # Скругление2
    # the kernel refuses this fillet: 0.5 mm, written as the material it takes off along each edge
    with BuildSketch(Plane(origin=(17.5, 3.5, 7), x_dir=(0, 1, 0), z_dir=(0, 0, 1))) as fillet_2_piece_1_section:
        Polygon((0, 0), (FILLET_2_R, 0), (FILLET_2_R, -FILLET_2_R), (0, -FILLET_2_R), align=None)
    fillet_2_piece_1 = extrude(amount=FILLET_2_R, mode=Mode.PRIVATE)
    fillet_2_piece_1 = fillet_2_piece_1 - Plane(origin=(17.5, 3.5, 7), x_dir=(-0.7071067811865475, -0.7071067811865475, 0), z_dir=(0, 0, 1)) * Sphere(FILLET_2_R, mode=Mode.PRIVATE)
    add(fillet_2_piece_1, mode=Mode.SUBTRACT)
    with BuildSketch(Plane(origin=(-17.5, 3.5, 7), x_dir=(0, 1, 0), z_dir=(0, 0, 1))) as fillet_2_piece_2_section:
        Polygon((0, 0), (FILLET_2_R, 0), (FILLET_2_R, FILLET_2_R), (0, FILLET_2_R), align=None)
    fillet_2_piece_2 = extrude(amount=FILLET_2_R, mode=Mode.PRIVATE)
    fillet_2_piece_2 = fillet_2_piece_2 - Plane(origin=(-17.5, 3.5, 7), x_dir=(0.7071067811865475, -0.7071067811865475, 0), z_dir=(0, 0, 1)) * Sphere(FILLET_2_R, mode=Mode.PRIVATE)
    add(fillet_2_piece_2, mode=Mode.SUBTRACT)
    with BuildSketch(Plane(origin=(-17.5, 4, 7.5), x_dir=(0, -1, 0), z_dir=(1, 0, 0))) as fillet_2_piece_3:
        with BuildLine():
            CenterArc((FILLET_2_R, FILLET_2_R), FILLET_2_R, 180, 90)
            Line((0, FILLET_2_R), (0, 0))
            Line((0, 0), (FILLET_2_R, 0))
        make_face()
    extrude(amount=35, mode=Mode.SUBTRACT)


solid = part.part
